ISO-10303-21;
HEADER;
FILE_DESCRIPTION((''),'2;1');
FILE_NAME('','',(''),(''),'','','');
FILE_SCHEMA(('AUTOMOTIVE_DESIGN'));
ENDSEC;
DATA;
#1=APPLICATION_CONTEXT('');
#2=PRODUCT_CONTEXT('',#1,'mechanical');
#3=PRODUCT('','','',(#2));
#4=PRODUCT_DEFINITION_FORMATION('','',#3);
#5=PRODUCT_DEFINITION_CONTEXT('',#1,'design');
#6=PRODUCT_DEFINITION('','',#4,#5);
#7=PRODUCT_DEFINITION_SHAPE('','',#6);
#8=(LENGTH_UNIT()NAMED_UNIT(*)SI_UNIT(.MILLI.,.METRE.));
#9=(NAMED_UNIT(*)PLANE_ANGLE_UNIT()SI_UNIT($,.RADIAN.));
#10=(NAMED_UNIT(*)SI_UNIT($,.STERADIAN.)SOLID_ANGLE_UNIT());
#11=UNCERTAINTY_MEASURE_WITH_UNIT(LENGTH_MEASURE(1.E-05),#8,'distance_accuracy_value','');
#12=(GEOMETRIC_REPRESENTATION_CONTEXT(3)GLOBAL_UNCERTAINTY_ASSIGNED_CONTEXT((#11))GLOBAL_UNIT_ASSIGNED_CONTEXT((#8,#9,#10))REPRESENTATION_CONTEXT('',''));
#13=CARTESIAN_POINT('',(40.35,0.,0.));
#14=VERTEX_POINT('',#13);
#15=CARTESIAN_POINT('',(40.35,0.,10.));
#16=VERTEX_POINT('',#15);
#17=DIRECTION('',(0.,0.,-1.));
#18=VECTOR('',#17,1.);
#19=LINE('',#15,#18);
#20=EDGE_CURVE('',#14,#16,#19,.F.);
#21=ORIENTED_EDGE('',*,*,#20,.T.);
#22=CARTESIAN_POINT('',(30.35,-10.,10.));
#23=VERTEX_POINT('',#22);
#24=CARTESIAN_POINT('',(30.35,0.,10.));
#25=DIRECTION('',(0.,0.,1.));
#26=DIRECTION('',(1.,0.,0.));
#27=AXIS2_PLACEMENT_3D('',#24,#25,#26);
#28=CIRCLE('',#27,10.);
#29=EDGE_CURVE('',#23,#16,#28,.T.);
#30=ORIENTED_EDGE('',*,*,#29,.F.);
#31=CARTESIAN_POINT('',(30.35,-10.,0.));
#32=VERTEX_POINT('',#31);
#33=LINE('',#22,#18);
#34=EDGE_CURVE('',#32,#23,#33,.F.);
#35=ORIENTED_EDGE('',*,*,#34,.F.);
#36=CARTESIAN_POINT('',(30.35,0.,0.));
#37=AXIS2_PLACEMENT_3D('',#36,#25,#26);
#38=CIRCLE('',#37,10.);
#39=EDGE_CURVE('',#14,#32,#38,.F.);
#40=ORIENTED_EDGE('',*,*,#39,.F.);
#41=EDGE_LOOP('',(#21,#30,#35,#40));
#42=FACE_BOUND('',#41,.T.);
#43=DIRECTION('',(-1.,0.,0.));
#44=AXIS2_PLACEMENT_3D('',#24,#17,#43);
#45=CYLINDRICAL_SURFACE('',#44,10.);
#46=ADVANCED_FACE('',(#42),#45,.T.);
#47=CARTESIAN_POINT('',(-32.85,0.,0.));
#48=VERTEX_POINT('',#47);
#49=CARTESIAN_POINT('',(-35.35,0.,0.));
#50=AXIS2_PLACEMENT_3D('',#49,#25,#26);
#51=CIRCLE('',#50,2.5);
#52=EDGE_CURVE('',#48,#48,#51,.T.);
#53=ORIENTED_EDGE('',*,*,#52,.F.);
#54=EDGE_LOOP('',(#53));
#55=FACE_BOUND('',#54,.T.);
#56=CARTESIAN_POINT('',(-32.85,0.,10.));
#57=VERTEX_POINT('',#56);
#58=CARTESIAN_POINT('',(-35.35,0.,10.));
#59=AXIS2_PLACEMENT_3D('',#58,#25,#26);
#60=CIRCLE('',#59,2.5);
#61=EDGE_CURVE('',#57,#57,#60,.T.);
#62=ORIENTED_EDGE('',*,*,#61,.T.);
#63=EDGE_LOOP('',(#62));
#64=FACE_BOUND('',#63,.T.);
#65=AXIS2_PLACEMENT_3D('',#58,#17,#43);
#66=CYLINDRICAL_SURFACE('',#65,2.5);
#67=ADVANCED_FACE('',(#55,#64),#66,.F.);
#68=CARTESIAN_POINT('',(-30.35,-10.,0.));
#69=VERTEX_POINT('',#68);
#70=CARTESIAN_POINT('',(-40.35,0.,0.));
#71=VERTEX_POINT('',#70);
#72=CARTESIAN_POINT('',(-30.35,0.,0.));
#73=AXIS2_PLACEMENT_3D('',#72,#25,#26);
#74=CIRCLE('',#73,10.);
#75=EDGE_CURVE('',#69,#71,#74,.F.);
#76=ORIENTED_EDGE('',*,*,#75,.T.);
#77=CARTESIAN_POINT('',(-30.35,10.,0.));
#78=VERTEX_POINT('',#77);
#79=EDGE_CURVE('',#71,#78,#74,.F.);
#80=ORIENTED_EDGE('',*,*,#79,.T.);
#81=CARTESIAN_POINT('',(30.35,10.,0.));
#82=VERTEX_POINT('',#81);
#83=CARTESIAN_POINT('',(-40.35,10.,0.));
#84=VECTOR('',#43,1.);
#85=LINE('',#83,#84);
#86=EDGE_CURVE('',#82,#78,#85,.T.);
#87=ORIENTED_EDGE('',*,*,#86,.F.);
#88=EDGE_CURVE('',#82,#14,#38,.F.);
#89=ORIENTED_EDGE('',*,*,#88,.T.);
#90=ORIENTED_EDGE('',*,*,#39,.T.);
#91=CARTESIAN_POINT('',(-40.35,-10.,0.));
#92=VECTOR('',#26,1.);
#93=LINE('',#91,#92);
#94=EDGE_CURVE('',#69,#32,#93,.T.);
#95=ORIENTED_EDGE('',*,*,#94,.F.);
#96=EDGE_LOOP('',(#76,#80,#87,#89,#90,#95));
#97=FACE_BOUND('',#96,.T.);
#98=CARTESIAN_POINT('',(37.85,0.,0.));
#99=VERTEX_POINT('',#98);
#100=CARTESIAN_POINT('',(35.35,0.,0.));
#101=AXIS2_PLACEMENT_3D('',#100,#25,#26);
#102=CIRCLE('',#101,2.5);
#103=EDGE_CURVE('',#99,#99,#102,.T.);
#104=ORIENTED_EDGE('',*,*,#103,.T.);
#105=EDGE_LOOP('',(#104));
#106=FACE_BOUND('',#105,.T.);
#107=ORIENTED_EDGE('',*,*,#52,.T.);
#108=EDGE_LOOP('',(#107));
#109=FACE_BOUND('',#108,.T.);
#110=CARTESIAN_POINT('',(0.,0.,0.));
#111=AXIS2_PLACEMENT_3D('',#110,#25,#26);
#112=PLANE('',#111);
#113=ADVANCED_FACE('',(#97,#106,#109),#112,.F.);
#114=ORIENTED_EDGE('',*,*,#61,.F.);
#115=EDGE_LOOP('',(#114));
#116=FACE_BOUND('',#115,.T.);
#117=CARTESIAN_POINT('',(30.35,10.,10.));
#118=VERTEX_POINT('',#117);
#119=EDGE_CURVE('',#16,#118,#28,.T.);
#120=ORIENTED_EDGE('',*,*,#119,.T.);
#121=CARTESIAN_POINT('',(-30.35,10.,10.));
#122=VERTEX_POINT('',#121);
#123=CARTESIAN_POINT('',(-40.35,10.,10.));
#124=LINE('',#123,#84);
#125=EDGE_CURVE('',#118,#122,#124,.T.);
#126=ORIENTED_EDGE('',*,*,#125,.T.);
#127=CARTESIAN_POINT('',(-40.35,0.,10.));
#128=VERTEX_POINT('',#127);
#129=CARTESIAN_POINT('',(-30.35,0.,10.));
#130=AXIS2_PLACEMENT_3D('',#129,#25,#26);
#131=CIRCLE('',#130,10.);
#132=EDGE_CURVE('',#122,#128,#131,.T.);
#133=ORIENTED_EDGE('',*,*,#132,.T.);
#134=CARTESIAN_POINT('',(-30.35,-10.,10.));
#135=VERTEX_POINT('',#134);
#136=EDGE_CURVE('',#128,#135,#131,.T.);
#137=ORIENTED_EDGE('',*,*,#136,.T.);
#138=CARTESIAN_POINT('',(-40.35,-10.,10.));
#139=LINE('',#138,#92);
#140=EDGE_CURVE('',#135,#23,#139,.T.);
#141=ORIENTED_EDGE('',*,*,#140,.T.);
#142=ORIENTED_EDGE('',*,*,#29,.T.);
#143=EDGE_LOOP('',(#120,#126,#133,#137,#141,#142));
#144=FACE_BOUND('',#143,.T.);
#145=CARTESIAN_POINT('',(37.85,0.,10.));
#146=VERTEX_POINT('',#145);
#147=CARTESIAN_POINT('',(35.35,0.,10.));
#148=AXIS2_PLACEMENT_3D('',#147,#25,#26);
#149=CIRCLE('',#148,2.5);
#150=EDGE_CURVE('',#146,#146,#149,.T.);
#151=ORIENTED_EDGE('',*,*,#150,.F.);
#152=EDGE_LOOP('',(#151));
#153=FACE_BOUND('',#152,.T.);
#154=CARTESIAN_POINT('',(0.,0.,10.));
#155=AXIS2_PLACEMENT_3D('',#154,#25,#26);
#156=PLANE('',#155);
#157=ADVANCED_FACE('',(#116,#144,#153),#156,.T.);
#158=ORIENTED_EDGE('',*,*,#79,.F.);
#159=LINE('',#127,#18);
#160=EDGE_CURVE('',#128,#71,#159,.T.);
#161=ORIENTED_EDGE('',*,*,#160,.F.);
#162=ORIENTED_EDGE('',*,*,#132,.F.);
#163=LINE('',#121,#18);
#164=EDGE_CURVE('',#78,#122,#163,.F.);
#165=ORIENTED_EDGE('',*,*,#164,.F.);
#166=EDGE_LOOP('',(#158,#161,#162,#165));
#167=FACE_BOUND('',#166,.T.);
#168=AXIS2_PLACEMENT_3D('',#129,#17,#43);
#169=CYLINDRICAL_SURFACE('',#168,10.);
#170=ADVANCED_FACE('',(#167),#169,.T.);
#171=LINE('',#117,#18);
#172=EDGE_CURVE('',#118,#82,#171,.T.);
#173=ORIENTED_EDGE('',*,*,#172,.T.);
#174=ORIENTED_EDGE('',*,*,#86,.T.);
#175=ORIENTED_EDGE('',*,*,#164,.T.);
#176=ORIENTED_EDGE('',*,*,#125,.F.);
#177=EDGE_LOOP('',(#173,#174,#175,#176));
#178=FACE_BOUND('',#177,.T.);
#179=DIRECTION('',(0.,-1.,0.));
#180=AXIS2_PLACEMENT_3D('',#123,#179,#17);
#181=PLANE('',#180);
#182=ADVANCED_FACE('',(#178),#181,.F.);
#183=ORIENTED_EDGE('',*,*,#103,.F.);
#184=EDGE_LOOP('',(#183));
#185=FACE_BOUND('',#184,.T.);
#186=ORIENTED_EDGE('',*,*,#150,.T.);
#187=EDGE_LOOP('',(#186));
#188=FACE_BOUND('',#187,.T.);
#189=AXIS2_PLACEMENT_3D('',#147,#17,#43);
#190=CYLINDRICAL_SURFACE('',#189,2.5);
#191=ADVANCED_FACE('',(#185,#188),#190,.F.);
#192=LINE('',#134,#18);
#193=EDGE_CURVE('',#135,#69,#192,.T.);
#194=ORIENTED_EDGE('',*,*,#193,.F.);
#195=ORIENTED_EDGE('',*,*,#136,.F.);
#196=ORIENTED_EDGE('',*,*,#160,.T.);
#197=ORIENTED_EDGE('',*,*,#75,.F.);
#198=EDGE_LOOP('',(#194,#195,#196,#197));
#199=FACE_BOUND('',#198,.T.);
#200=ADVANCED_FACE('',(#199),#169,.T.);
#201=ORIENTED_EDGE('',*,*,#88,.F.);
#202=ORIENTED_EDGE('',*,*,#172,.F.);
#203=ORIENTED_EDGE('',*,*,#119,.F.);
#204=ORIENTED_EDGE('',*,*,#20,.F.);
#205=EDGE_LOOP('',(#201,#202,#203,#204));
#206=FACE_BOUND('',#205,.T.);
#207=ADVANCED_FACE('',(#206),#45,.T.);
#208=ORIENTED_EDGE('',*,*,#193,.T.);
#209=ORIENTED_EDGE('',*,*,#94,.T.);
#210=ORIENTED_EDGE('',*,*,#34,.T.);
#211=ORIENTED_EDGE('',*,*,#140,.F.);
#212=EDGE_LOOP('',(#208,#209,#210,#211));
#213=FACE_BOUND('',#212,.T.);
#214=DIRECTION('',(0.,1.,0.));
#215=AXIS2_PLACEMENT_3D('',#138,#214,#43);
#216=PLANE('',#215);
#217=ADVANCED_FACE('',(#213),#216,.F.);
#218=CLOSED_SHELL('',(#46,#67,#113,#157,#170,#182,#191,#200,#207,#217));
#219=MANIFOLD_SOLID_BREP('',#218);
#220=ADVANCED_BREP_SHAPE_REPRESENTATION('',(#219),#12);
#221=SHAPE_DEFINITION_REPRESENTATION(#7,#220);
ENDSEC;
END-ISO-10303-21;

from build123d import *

# Parameters (mm, degrees)
SKETCH1_W           = 80.7
SKETCH1_H           = 20
SKETCH1_R           = 2.5
BOSS_EXTRUDE1_DEPTH = 10
FILLET1_R           = 10


with BuildPart() as part:
    # Sketch1 → Boss-Extrude1 (new body)
    with BuildSketch(Plane.XY):
        Rectangle(SKETCH1_W, SKETCH1_H)
        with Locations((-35.35, 0)):
            Circle(SKETCH1_R, mode=Mode.SUBTRACT)
        with Locations((35.35, 0)):
            Circle(SKETCH1_R, mode=Mode.SUBTRACT)
    extrude(amount=BOSS_EXTRUDE1_DEPTH)

    # Fillet1
    fillet1_edges = [part.edges().sort_by_distance(p)[0] for p in [
        (40.35, -10, 5),
        (40.35, 10, 5),
        (-40.35, -10, 5),
        (-40.35, 10, 5),
    ]]
    fillet(fillet1_edges, radius=FILLET1_R - 0.0001)  # a hair under: the kernel refuses the full size


solid = part.part
